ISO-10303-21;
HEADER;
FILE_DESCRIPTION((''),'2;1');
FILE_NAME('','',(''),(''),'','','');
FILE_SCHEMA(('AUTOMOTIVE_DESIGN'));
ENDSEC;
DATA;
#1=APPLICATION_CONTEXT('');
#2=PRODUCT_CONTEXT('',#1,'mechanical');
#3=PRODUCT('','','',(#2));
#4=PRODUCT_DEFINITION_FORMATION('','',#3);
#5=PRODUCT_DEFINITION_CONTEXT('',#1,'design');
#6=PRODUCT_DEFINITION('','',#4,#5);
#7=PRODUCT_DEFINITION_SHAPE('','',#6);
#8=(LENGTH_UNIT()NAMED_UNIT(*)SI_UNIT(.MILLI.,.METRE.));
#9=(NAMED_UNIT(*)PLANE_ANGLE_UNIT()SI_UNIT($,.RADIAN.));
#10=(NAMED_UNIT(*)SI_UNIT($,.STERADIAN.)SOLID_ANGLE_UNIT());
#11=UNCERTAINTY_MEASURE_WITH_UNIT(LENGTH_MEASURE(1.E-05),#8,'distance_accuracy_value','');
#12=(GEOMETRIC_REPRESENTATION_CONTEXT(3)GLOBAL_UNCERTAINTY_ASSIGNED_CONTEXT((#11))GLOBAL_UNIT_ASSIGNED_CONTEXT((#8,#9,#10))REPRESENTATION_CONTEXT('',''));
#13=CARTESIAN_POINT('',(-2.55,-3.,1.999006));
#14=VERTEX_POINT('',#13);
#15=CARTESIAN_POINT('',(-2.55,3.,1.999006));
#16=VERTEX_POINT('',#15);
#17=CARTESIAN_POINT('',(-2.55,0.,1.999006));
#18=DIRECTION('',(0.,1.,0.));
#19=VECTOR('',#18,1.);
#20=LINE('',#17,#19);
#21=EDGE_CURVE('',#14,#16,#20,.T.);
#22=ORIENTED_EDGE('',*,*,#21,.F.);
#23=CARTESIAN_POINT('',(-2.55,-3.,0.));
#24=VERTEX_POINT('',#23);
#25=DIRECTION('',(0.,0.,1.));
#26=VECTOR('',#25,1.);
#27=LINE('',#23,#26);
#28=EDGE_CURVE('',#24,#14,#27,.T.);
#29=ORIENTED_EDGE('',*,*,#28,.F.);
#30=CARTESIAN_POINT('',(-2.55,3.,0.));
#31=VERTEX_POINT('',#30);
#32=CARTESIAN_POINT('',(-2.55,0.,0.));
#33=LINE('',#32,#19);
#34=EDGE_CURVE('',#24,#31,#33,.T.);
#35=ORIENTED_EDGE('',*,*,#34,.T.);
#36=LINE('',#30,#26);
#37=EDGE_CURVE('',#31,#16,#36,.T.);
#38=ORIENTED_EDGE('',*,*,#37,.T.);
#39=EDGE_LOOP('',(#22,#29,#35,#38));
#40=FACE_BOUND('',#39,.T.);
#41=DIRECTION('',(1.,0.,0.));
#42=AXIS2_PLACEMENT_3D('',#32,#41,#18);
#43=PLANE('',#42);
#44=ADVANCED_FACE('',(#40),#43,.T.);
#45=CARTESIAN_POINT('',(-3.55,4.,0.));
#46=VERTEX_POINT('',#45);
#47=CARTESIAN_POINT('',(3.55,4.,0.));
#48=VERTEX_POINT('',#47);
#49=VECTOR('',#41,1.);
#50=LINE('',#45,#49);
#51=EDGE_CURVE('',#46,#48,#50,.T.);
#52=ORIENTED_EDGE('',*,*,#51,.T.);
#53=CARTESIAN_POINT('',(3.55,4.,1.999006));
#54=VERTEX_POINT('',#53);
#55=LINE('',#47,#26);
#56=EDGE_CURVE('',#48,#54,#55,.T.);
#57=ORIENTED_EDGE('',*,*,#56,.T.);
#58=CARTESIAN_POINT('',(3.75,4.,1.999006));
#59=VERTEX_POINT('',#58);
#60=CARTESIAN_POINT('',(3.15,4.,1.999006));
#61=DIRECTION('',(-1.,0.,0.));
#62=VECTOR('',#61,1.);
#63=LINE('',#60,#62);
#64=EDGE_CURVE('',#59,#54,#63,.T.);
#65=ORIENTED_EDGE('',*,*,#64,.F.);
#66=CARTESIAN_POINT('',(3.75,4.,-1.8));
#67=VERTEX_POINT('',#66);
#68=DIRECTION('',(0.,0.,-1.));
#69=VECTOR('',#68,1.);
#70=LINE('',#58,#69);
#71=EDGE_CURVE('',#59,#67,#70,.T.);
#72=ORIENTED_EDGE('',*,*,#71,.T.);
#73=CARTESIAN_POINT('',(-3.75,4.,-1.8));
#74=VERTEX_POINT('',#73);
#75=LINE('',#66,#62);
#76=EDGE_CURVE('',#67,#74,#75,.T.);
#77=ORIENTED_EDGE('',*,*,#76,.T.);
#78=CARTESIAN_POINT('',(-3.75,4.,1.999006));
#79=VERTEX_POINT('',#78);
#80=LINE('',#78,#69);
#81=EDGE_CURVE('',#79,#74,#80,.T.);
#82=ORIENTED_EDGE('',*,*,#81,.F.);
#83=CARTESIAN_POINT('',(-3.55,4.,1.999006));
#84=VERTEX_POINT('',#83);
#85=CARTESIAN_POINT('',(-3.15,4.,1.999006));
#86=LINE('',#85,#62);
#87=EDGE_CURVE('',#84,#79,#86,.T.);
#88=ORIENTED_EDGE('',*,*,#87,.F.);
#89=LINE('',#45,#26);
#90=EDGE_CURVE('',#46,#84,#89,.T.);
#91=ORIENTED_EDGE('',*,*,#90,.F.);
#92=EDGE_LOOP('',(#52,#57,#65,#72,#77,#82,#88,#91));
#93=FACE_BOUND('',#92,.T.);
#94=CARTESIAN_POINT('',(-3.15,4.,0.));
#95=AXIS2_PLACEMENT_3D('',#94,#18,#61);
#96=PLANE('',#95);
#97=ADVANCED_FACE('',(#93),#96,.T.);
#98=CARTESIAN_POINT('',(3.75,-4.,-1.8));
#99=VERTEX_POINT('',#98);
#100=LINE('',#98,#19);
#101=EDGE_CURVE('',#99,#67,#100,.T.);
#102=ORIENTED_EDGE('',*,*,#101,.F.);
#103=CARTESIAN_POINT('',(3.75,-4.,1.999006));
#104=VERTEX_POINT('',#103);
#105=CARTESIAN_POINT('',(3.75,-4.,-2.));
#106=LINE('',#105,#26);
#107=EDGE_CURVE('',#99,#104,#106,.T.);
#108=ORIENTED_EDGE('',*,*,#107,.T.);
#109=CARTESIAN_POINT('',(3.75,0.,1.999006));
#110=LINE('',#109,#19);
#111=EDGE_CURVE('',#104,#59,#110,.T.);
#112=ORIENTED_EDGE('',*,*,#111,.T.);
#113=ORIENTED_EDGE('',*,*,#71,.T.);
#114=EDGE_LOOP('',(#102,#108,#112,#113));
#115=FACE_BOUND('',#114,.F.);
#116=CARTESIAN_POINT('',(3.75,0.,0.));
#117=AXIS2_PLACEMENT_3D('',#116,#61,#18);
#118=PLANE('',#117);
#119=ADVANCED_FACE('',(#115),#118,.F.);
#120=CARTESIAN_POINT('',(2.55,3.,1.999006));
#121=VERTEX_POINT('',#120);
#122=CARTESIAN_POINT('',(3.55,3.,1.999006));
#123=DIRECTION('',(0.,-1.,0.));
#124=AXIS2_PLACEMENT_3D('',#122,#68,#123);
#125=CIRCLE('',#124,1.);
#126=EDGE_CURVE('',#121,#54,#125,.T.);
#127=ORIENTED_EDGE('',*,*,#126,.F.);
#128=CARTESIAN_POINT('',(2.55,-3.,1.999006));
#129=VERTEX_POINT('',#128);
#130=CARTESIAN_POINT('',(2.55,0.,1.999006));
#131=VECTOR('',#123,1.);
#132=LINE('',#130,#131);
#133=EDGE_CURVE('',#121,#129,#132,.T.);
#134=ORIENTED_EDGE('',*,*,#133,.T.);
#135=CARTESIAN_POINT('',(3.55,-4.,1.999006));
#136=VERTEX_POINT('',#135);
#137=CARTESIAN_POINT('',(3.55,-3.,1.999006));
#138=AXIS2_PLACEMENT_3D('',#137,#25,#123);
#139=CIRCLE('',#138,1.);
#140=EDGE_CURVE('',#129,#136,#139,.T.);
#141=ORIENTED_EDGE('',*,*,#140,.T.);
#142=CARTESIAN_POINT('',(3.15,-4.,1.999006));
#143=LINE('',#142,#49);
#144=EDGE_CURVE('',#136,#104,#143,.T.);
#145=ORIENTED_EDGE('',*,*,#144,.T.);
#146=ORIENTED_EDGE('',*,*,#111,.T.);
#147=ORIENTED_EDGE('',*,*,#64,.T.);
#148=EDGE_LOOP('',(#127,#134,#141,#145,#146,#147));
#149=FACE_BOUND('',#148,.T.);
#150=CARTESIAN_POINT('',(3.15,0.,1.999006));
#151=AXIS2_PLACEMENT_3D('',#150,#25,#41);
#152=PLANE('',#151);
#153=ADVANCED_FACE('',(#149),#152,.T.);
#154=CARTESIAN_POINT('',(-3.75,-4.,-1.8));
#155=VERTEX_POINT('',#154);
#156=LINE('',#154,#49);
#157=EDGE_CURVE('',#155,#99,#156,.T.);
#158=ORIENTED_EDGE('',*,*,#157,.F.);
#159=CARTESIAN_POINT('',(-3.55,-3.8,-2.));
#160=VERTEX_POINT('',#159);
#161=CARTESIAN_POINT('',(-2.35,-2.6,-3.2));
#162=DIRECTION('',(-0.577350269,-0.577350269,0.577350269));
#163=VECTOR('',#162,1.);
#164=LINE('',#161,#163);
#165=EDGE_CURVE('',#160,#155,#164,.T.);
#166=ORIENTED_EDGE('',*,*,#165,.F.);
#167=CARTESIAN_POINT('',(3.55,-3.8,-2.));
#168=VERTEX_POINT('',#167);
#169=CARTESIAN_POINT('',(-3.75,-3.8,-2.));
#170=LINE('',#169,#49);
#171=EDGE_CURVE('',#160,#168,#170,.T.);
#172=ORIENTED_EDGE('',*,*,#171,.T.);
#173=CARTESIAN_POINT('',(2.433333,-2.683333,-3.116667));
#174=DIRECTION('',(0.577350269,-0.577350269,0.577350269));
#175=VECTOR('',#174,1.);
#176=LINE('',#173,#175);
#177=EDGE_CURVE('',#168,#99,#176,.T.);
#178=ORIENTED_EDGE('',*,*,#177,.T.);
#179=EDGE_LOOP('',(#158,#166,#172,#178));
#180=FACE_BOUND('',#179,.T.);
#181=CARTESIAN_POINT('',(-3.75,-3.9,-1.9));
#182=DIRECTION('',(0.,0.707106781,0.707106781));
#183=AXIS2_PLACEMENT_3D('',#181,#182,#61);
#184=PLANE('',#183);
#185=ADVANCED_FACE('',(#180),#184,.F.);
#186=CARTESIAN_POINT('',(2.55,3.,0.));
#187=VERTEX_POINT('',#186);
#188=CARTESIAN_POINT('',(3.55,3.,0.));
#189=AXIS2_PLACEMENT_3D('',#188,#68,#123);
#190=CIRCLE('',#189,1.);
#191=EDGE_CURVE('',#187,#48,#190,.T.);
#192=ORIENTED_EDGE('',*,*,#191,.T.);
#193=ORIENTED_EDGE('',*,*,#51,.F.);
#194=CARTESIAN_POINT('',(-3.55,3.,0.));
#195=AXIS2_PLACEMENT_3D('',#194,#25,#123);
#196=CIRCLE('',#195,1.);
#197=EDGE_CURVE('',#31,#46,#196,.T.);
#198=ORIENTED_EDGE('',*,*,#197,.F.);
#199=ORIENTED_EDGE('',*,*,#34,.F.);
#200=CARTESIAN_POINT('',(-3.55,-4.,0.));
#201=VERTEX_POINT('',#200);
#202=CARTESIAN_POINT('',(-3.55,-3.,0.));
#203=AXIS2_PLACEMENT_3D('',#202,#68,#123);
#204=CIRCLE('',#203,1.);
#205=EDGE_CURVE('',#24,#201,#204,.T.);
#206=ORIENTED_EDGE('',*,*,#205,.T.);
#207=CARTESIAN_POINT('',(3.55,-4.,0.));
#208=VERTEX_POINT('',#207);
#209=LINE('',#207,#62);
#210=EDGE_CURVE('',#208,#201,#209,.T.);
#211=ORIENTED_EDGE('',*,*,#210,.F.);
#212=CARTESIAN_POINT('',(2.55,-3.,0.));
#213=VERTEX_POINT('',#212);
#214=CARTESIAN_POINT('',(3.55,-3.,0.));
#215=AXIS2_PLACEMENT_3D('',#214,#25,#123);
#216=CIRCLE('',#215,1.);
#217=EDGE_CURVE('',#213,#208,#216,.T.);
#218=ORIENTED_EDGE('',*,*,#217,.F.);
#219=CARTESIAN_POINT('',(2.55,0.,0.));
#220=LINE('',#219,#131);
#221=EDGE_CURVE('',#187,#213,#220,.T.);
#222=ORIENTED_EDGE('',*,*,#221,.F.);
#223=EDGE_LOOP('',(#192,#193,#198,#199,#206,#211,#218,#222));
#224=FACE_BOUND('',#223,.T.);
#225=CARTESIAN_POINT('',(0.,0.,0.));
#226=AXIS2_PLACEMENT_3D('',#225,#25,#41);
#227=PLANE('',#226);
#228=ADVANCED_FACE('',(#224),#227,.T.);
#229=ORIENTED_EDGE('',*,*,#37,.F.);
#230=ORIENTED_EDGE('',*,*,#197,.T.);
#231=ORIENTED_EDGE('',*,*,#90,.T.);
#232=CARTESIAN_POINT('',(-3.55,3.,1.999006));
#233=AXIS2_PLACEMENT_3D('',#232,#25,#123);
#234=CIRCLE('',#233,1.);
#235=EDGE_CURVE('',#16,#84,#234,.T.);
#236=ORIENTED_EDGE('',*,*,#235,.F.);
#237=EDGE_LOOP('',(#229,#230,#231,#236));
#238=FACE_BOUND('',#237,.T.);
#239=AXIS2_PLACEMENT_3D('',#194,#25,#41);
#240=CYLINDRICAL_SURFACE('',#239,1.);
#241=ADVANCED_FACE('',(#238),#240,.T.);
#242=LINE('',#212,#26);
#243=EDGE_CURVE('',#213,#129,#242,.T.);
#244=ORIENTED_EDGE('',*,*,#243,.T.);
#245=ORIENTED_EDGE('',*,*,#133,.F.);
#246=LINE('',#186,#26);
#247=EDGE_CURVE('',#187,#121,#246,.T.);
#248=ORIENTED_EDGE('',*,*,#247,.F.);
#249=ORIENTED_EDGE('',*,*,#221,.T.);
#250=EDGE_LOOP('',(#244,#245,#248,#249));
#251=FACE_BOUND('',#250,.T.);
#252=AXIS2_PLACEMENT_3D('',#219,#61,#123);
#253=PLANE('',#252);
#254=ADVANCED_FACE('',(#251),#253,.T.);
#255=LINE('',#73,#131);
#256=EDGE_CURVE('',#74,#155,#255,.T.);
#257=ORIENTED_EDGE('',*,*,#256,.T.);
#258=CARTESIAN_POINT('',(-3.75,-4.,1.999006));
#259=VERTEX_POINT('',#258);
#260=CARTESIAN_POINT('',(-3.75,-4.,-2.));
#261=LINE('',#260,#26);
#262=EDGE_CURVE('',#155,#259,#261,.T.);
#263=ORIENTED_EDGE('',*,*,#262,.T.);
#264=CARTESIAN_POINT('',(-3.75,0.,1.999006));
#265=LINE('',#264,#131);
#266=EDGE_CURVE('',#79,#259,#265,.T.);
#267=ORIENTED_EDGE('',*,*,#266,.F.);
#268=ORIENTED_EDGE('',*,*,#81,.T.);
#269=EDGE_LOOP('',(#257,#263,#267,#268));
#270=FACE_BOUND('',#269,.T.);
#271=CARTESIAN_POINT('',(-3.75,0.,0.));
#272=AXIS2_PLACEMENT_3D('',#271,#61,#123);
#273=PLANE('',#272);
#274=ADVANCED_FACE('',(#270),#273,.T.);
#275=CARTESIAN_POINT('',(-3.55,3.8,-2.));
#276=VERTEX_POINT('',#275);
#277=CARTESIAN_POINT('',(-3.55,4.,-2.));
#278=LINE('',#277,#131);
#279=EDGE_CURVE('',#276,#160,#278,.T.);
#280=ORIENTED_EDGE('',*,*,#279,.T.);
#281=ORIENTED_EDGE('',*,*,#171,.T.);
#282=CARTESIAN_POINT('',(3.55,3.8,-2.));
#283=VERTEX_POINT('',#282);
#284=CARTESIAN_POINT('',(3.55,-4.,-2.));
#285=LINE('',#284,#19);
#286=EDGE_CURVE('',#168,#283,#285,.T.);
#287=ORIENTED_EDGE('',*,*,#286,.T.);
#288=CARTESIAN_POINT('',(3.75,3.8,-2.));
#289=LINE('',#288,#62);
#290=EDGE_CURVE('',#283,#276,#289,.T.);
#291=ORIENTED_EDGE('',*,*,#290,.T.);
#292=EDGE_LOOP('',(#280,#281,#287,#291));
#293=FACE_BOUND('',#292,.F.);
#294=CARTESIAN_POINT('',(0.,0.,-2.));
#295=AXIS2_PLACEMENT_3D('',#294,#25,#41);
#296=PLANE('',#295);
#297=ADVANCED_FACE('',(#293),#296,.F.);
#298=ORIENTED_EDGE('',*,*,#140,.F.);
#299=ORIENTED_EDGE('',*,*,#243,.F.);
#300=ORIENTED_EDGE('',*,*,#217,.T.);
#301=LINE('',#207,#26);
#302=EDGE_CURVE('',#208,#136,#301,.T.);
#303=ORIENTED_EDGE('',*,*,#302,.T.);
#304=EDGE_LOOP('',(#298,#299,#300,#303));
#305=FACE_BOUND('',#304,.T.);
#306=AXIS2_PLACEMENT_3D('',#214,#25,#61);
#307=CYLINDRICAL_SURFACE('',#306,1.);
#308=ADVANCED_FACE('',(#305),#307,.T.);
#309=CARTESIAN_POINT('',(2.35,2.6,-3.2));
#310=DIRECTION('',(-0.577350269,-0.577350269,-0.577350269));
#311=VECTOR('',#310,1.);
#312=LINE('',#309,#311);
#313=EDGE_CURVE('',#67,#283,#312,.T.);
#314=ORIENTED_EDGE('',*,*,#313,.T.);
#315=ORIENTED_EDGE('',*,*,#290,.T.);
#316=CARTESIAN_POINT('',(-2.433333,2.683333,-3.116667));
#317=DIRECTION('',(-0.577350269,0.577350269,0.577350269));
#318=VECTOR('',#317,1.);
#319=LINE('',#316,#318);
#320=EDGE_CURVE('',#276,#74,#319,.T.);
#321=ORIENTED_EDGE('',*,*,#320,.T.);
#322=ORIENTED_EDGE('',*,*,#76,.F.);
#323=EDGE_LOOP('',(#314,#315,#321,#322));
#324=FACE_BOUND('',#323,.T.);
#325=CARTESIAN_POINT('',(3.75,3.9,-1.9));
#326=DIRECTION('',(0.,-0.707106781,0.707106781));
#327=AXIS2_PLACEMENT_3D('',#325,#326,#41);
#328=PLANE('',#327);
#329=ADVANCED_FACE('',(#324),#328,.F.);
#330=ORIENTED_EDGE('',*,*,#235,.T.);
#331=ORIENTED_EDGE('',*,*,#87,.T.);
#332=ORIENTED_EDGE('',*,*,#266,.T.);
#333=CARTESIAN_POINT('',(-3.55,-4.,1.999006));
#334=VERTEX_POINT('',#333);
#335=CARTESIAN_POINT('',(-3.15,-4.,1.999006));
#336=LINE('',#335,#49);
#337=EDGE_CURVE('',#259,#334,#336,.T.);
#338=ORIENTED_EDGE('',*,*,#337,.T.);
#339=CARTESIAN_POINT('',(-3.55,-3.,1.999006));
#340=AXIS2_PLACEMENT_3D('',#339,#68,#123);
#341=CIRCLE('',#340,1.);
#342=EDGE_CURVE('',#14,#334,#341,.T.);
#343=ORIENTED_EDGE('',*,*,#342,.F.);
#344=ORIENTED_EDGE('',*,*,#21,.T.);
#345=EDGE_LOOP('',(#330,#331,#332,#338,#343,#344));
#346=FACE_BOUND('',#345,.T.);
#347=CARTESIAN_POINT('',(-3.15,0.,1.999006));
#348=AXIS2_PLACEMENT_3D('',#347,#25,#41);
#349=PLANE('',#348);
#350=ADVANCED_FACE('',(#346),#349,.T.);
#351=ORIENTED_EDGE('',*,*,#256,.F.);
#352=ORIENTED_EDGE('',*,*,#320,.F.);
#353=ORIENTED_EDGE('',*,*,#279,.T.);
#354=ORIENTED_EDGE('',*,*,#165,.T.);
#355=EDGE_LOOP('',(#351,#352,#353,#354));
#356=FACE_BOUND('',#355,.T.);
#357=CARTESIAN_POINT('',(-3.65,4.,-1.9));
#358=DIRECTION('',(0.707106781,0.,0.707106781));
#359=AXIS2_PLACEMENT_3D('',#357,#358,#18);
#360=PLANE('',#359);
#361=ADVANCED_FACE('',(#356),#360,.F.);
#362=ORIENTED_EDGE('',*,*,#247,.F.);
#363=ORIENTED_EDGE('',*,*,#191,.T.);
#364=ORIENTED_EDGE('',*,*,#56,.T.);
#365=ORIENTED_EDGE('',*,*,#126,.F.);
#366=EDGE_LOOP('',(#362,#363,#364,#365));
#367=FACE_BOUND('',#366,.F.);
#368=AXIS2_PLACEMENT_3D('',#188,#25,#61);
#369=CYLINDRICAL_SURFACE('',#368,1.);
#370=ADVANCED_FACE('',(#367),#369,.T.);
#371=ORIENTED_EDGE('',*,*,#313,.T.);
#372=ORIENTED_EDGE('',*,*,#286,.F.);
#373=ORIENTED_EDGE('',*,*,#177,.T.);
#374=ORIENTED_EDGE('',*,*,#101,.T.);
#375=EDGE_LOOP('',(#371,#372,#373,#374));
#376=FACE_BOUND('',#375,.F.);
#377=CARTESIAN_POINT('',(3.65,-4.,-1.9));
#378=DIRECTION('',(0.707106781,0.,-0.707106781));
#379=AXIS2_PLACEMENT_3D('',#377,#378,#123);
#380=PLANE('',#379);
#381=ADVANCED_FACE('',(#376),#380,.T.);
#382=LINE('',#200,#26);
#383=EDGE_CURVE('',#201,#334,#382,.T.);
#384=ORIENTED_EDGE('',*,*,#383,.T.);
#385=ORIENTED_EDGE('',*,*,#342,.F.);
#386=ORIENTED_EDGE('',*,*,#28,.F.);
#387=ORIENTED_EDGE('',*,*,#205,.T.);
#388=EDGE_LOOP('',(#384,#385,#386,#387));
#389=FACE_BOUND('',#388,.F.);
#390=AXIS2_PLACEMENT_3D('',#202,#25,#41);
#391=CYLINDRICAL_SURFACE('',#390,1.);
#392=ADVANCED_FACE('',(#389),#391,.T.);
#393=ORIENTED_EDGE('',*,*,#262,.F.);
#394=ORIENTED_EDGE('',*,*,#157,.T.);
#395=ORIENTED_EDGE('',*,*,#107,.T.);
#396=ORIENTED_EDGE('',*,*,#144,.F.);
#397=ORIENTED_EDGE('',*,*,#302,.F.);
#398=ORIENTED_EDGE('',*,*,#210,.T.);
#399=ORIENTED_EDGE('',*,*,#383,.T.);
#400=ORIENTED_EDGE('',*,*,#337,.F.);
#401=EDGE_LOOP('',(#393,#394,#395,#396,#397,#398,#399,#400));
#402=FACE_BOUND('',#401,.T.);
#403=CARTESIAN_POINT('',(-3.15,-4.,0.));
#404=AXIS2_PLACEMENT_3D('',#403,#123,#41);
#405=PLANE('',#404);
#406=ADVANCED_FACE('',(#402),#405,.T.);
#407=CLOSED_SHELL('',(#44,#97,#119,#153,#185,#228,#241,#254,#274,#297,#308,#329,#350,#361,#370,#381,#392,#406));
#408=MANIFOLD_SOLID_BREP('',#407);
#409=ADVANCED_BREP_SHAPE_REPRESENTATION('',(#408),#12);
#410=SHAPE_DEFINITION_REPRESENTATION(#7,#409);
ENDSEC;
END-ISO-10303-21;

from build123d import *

# Parameters (mm, degrees)
F1_W    = 5.1
F1_H    = 8
F1_W_2  = 1.2
F4_R    = 1
F5_SIZE = 0.2


with BuildPart() as f2:
    # F2: sweep along a path in F0
    with BuildLine(Plane.XZ) as f2_path:
        Line((0, 0), (0, -2))
    # F1 (on Top) → F2 (sweep)
    with BuildSketch(Plane.XY):
        Rectangle(F1_W, F1_H)
        with Locations((3.15, 0)):
            Rectangle(F1_W_2, F1_H)
        with Locations((-3.15, 0)):
            Rectangle(F1_W_2, F1_H)
    sweep(path=f2_path.line)

    # F3: sweep along a path in F0
    with BuildLine(Plane.XZ) as f3_path:
        Line((0, 0), (0, 1.9990060536))
    # F1 (on Top) → F3 (sweep)
    with BuildSketch(Plane.XY):
        with Locations((-3.15, 0)):
            Rectangle(F1_W_2, F1_H)
        with Locations((3.15, 0)):
            Rectangle(F1_W_2, F1_H)
    sweep(path=f3_path.line)

    # F4
    f4_edges = [f2.edges().sort_by_distance(p)[0] for p in [
        (-2.55, 4, 0.999503),
        (2.55, 4, 0.999503),
        (2.55, -4, 0.999503),
        (-2.55, -4, 0.999503),
    ]]
    fillet(f4_edges, radius=F4_R)

    # F5
    f5_edges = [f2.edges().sort_by_distance(p)[0] for p in [
        (0, -4, -2),
        (3.75, 0, -2),
        (0, 4, -2),
        (-3.75, 0, -2),
    ]]
    chamfer(f5_edges, length=F5_SIZE)


solid = f2.part
